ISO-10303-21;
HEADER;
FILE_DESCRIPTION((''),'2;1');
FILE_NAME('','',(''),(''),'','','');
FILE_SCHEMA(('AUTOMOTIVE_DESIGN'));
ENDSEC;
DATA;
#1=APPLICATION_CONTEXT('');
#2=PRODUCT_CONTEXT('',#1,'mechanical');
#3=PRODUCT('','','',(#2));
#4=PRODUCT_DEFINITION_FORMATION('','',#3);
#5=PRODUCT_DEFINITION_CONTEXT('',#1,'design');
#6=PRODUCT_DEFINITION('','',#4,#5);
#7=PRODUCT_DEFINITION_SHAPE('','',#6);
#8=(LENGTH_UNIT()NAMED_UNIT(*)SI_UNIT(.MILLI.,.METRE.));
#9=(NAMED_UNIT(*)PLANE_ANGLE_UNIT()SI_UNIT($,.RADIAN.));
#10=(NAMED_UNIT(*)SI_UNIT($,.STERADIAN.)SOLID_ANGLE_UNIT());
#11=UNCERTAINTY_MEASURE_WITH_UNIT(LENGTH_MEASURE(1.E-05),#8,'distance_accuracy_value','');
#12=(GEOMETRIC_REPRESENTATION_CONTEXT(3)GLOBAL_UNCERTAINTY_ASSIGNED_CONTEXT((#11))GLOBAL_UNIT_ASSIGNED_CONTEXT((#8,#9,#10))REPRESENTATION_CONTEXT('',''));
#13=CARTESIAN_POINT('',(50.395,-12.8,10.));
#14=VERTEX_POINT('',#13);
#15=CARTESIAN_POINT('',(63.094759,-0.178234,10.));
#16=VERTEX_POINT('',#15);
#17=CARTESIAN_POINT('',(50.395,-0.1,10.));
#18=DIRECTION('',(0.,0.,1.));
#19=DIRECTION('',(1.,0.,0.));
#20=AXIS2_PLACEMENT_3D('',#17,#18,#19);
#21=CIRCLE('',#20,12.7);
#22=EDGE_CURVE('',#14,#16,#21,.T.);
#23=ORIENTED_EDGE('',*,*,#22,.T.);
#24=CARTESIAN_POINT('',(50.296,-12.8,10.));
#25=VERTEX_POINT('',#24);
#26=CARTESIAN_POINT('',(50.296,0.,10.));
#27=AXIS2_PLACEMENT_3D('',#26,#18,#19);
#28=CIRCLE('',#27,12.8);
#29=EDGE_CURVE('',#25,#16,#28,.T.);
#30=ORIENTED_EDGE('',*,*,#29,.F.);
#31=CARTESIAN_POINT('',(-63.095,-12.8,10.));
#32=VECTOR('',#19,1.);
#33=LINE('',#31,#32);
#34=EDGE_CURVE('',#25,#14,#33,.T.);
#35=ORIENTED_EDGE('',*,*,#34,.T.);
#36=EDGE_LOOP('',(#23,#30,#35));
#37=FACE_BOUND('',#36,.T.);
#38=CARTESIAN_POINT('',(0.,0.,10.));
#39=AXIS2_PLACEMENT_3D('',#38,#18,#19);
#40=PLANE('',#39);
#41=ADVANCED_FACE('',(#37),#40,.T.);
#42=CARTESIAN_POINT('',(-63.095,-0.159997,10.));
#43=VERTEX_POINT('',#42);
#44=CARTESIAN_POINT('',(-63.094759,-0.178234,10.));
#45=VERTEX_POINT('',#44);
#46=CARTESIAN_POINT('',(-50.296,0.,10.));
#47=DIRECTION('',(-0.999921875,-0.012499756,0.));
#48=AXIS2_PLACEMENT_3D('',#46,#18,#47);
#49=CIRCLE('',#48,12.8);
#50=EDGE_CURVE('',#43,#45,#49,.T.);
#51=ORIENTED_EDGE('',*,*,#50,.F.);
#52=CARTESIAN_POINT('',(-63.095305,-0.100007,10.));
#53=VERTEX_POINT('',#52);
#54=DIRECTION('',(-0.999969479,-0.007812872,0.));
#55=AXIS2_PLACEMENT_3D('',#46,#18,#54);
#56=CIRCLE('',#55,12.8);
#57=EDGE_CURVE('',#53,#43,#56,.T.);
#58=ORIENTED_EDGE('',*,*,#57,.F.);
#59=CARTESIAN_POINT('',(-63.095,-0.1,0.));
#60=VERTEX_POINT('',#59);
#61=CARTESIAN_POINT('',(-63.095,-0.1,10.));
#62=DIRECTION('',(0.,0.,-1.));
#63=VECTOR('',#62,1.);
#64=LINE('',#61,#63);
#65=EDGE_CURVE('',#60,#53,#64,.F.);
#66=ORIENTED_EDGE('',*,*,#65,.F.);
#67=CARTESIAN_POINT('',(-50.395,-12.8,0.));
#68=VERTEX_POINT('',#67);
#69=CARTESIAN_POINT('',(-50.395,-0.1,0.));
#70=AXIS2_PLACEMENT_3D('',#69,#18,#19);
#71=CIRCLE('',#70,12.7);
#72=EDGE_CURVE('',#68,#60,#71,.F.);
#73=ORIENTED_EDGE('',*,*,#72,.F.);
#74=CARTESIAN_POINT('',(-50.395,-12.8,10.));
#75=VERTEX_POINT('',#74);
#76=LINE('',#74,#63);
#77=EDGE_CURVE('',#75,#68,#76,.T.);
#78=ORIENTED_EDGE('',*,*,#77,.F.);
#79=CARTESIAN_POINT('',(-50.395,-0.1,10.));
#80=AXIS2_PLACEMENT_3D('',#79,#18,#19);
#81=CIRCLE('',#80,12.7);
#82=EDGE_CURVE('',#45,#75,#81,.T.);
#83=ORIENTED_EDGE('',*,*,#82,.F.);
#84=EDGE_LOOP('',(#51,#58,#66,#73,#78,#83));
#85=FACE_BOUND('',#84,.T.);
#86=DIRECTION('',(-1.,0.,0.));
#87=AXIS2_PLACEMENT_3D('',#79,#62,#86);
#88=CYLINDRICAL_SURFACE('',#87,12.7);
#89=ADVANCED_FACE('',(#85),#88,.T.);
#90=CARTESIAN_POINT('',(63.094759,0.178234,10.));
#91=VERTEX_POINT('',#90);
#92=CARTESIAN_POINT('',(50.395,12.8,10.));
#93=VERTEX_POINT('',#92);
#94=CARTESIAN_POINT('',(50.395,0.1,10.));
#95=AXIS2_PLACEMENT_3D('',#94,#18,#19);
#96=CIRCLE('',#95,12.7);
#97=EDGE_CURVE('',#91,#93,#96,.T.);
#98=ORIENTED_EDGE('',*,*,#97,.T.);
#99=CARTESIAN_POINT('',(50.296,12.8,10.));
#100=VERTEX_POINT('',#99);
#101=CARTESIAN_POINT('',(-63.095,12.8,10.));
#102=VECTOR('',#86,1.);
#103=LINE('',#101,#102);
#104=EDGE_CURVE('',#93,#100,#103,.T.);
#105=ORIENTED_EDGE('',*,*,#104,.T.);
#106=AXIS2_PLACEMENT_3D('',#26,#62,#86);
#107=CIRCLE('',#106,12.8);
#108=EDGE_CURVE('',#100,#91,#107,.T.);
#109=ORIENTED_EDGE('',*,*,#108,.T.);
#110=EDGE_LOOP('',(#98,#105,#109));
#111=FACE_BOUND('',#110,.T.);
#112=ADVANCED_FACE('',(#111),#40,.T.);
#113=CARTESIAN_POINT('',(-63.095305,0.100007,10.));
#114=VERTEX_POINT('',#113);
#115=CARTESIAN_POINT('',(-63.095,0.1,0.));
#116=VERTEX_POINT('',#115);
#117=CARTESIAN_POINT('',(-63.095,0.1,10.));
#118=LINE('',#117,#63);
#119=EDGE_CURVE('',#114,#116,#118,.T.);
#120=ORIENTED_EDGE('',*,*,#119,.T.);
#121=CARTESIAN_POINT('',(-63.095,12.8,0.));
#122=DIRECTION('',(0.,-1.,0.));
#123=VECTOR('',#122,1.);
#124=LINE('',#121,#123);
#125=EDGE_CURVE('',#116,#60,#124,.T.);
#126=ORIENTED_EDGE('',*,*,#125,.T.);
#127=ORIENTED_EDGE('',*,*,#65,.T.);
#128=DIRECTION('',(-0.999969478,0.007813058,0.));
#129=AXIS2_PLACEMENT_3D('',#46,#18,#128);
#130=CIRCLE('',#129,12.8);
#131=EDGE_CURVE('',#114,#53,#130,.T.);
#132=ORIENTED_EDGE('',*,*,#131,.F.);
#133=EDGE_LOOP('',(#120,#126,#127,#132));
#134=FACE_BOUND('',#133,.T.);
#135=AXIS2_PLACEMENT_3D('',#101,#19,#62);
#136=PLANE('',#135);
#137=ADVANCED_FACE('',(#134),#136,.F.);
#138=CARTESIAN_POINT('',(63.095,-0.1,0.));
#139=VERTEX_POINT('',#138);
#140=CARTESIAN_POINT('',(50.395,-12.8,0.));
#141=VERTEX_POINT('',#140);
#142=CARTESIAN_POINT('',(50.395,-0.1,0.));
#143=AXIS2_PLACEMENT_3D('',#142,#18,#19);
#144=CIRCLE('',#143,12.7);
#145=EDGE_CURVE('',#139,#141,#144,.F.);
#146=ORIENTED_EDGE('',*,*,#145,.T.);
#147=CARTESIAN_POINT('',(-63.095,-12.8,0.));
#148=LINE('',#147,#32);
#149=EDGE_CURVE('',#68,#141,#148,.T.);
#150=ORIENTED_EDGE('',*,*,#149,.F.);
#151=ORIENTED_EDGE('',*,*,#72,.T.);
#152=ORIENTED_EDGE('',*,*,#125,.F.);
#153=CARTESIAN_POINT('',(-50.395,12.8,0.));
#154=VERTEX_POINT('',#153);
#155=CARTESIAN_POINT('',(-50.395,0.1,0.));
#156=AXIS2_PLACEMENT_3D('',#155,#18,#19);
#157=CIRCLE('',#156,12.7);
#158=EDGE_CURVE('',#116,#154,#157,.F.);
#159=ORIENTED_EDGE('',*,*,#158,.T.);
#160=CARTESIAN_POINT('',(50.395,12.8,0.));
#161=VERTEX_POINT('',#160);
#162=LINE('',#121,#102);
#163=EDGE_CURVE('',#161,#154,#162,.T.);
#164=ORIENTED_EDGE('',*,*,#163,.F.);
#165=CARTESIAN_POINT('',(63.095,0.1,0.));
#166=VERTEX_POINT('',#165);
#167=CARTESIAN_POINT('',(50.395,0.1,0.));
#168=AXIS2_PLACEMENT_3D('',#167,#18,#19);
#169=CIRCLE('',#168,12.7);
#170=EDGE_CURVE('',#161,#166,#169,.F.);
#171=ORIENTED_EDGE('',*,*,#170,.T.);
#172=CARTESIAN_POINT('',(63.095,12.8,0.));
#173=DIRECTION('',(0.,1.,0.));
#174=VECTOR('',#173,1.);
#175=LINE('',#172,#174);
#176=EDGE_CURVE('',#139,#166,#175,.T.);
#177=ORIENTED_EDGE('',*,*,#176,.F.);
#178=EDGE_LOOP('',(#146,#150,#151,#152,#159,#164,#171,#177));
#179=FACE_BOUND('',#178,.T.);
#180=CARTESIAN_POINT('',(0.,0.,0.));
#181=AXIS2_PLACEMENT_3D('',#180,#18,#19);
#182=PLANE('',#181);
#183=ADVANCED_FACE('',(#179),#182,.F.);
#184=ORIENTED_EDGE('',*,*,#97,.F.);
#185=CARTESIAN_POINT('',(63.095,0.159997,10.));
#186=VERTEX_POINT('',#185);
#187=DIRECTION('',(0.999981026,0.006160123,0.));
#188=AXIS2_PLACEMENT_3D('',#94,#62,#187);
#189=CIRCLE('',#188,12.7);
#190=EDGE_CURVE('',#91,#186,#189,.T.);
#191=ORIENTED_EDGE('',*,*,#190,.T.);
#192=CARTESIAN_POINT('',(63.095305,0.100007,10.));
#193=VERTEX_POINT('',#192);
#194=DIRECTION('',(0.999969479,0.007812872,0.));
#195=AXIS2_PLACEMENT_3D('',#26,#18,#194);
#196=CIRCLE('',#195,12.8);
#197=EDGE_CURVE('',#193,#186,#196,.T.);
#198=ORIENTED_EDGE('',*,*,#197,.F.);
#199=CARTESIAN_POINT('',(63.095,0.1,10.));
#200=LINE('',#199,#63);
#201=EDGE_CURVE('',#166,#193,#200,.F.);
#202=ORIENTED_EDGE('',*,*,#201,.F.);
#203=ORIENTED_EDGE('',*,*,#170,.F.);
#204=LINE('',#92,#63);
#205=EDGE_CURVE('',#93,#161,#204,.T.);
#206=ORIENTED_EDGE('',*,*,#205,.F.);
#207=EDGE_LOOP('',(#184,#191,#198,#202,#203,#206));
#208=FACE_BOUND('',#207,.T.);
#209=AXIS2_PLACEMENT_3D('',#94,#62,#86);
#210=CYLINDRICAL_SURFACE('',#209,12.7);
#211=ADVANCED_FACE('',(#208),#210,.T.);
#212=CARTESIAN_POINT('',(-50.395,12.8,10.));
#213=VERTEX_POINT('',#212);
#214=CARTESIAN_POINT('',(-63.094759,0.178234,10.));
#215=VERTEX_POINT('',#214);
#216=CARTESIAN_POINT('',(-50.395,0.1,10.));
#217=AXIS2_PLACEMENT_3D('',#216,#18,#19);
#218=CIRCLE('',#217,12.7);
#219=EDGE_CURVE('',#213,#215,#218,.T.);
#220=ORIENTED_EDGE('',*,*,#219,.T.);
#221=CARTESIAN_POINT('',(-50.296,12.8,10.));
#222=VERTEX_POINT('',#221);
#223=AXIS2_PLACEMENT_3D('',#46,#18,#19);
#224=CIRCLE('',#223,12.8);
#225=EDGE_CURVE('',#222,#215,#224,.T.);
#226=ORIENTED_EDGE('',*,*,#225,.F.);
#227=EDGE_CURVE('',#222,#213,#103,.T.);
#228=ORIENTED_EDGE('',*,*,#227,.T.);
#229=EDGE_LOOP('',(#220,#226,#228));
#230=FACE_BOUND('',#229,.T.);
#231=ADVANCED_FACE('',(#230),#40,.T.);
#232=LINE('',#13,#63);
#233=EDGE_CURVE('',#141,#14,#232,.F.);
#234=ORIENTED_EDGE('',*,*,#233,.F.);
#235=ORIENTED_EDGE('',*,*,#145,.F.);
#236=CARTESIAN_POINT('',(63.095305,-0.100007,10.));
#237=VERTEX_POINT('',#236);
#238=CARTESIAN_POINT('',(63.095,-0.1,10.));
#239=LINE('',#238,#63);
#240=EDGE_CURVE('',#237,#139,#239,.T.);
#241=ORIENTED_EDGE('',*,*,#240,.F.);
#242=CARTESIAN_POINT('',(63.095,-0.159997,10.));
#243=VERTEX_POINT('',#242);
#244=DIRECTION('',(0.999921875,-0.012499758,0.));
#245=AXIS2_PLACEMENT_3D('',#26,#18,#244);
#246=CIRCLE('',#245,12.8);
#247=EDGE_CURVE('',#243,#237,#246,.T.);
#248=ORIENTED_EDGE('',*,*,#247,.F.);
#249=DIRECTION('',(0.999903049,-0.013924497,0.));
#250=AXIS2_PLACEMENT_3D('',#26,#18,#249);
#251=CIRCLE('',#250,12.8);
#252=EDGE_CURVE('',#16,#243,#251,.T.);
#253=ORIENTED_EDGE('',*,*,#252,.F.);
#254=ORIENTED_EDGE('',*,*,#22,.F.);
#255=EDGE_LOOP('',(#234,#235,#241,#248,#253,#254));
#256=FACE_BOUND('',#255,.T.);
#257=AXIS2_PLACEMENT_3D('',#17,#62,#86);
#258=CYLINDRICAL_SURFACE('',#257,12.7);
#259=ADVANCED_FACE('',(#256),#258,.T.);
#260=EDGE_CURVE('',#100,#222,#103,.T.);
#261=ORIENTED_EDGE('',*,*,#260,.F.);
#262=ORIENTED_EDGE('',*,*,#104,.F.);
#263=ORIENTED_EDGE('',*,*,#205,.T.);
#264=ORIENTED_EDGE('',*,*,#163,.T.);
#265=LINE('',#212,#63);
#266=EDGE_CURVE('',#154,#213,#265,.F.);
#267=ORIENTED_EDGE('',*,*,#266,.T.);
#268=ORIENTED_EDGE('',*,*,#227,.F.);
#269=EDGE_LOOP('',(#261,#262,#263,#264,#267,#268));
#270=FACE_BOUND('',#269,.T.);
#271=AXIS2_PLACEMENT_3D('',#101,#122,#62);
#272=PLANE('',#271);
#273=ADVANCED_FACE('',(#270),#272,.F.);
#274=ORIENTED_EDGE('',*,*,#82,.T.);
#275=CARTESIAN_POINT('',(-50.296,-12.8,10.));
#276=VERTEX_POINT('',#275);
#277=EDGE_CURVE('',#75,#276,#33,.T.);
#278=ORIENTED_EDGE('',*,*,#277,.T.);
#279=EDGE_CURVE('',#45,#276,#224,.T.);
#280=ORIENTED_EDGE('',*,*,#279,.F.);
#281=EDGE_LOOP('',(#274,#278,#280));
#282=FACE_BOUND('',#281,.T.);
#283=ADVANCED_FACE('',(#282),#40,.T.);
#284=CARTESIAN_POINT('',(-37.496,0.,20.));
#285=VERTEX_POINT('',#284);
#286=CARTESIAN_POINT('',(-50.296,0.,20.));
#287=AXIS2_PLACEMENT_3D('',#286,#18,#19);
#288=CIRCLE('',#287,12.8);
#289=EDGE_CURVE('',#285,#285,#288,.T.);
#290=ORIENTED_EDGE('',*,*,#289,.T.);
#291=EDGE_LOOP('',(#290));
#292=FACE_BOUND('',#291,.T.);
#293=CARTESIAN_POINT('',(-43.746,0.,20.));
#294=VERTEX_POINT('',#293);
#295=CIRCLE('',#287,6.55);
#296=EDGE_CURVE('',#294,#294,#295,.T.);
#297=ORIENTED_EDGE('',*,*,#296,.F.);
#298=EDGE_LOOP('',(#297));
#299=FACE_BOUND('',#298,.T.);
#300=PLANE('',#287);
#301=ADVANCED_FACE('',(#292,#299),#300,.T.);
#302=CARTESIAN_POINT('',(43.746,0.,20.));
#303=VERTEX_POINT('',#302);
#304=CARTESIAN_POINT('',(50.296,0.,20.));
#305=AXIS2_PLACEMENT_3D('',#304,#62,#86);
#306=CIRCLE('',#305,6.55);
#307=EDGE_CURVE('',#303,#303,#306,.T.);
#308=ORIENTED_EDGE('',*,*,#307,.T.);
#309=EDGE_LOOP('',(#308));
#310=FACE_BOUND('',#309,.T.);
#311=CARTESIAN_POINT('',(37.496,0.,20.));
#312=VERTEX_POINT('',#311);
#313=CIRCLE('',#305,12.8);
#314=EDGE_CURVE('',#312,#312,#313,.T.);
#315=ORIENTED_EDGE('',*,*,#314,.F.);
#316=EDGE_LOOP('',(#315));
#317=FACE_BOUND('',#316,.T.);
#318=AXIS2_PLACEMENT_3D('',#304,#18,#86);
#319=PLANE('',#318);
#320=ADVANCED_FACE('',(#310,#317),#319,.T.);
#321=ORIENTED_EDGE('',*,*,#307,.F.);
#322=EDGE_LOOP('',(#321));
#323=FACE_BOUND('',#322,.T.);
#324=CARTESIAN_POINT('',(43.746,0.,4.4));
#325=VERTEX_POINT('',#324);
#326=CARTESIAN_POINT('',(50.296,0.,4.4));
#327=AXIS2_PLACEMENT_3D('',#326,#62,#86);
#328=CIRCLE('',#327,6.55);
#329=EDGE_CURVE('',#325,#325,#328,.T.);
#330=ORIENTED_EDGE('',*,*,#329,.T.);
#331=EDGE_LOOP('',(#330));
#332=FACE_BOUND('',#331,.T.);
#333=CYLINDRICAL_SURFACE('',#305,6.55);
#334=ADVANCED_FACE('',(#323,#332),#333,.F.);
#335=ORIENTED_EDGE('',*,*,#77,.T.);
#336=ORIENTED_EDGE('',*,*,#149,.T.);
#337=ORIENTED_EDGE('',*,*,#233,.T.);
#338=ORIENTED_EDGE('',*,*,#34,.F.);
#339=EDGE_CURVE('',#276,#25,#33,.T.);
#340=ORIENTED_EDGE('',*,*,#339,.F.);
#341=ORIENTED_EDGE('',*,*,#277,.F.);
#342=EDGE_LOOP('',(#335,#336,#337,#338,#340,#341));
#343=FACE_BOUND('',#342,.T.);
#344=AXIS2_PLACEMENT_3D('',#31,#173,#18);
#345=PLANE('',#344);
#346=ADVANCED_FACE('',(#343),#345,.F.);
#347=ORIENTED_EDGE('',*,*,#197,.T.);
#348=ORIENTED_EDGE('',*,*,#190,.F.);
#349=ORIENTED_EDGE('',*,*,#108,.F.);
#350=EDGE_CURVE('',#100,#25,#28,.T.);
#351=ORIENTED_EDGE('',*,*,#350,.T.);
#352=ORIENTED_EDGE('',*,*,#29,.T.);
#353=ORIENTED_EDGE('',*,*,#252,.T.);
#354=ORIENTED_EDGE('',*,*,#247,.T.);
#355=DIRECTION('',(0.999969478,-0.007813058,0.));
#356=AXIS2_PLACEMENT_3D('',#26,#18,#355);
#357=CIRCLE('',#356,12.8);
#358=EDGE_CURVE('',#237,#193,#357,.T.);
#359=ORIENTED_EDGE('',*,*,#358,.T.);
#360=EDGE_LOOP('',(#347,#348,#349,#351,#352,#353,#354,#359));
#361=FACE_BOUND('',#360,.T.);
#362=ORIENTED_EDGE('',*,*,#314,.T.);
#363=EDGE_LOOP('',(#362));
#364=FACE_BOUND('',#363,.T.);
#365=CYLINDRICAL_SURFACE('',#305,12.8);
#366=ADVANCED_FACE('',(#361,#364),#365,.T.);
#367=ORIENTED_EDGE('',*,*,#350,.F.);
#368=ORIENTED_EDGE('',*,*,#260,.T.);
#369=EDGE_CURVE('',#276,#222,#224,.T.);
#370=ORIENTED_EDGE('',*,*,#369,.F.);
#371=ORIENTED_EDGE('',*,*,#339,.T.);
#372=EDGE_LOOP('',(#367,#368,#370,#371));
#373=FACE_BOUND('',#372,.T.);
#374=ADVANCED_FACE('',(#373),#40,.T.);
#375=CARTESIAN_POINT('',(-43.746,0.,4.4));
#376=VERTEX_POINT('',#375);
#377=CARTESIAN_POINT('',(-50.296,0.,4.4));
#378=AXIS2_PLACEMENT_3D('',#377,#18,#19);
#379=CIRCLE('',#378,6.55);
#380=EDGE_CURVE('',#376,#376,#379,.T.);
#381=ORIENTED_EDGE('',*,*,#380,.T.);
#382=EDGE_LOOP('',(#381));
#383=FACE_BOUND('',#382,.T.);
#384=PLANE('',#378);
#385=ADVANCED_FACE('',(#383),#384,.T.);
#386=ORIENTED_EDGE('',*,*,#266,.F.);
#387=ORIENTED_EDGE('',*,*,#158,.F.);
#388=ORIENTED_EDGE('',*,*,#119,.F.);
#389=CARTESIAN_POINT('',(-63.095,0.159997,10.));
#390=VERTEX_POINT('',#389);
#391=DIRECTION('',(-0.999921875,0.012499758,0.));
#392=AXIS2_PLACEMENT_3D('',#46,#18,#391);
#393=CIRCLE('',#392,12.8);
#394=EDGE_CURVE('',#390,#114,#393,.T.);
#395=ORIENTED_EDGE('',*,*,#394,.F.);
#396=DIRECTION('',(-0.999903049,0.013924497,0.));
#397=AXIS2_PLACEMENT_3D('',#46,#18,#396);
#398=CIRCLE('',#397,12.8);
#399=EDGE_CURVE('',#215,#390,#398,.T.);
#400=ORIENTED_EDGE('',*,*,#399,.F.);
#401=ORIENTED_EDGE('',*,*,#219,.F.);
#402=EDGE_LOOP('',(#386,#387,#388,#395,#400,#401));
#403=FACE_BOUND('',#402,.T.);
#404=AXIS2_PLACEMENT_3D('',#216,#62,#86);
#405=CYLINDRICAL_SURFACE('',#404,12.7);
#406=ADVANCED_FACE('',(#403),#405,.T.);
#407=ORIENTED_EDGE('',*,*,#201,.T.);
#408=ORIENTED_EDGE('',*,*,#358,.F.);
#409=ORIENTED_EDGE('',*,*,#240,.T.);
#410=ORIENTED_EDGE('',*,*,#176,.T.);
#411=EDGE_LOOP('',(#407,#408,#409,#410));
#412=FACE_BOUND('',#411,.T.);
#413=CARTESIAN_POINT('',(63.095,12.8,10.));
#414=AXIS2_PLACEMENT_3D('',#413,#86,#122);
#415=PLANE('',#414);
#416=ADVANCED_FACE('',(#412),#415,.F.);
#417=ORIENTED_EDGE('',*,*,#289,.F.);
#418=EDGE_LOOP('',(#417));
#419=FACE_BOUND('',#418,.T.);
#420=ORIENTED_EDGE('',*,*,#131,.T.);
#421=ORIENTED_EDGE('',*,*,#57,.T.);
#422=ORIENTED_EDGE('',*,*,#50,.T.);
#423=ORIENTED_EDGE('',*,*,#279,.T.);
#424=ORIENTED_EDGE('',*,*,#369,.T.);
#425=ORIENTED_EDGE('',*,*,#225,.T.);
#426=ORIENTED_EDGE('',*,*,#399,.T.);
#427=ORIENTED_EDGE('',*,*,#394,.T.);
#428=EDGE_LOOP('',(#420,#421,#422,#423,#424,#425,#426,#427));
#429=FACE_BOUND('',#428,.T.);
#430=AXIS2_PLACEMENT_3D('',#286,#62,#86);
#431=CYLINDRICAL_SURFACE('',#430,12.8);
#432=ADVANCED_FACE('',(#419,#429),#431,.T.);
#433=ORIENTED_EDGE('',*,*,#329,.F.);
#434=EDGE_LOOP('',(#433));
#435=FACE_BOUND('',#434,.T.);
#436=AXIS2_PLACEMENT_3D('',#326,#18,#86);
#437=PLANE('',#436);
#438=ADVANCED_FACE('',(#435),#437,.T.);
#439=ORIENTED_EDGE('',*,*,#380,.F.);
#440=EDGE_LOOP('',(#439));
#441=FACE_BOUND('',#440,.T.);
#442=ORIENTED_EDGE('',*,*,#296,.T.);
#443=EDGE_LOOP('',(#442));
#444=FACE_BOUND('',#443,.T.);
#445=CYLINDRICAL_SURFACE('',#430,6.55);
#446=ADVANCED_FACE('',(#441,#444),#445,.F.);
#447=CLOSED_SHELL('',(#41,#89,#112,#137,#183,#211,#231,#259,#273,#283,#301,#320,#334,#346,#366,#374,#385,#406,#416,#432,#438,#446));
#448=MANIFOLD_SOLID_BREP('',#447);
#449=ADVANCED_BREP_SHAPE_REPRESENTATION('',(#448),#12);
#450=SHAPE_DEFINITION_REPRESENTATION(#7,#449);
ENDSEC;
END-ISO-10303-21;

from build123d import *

# Parameters (mm, degrees)
SKETCH2_W           = 126.19
SKETCH2_H           = 25.6
BOSS_EXTRUDE1_DEPTH = 10
SKETCH3_R           = 12.8
SKETCH3_R_2         = 6.55
BOSS_EXTRUDE2_DEPTH = 10
FILLET2_R           = 12.7
CUT_EXTRUDE1_START  = -5.6
SKETCH4_R           = 6.55
CUT_EXTRUDE1_DEPTH  = 5.6


with BuildPart() as part:
    # Sketch2 → Boss-Extrude1 (new body)
    with BuildSketch(Plane.XY):
        Rectangle(SKETCH2_W, SKETCH2_H)
    extrude(amount=BOSS_EXTRUDE1_DEPTH)

    # Sketch3 → Boss-Extrude2 (add)
    with BuildSketch(Plane.XY.offset(10)):
        with Locations(Location((-50.296, 0, 0), (0, 0, 179.283798093))):
            Circle(SKETCH3_R)
        with Locations((-50.296, 0)):
            Circle(SKETCH3_R_2, mode=Mode.SUBTRACT)
    boss_extrude2 = extrude(amount=BOSS_EXTRUDE2_DEPTH)

    # Mirror1: Boss-Extrude2 across plane
    add(boss_extrude2.mirror(Plane(origin=(0, 0, 0), x_dir=(0, 0, 1), z_dir=(1, 0, 0))))

    # Fillet2
    # the kernel refuses this fillet: 12.7 mm, written as the material it takes off along each edge
    with BuildSketch(Plane(origin=(-63.095, -12.8, -31.75), x_dir=(0, 1, 0), z_dir=(0, 0, 1)), Plane(origin=(-63.095, 12.8, -31.75), x_dir=(1, 0, 0), z_dir=(0, 0, 1))) as fillet2_piece_1:
        with BuildLine():
            CenterArc((FILLET2_R, -FILLET2_R), FILLET2_R, 90, 90)
            Line((0, -FILLET2_R), (0, 0))
            Line((0, 0), (FILLET2_R, 0))
        make_face()
    extrude(amount=73.5, mode=Mode.SUBTRACT)
    with BuildSketch(Plane(origin=(63.095, -12.8, -31.75), x_dir=(0, 1, 0), z_dir=(0, 0, 1)), Plane(origin=(63.095, 12.8, -31.75), x_dir=(-1, 0, 0), z_dir=(0, 0, 1))) as fillet2_piece_2:
        with BuildLine():
            CenterArc((FILLET2_R, FILLET2_R), FILLET2_R, 180, 90)
            Line((0, FILLET2_R), (0, 0))
            Line((0, 0), (FILLET2_R, 0))
        make_face()
    extrude(amount=73.5, mode=Mode.SUBTRACT)

    # Sketch4 → Cut-Extrude1 (cut)
    with BuildSketch(Plane.XY.offset(10).offset(CUT_EXTRUDE1_START)):
        with Locations((-50.296, 0)):
            Circle(SKETCH4_R)
    cut_extrude1 = extrude(amount=CUT_EXTRUDE1_DEPTH, mode=Mode.SUBTRACT)

    # Mirror2: Cut-Extrude1 across plane
    add(cut_extrude1.mirror(Plane(origin=(0, 0, 0), x_dir=(0, 0, 1), z_dir=(1, 0, 0))), mode=Mode.SUBTRACT)


solid = part.part
